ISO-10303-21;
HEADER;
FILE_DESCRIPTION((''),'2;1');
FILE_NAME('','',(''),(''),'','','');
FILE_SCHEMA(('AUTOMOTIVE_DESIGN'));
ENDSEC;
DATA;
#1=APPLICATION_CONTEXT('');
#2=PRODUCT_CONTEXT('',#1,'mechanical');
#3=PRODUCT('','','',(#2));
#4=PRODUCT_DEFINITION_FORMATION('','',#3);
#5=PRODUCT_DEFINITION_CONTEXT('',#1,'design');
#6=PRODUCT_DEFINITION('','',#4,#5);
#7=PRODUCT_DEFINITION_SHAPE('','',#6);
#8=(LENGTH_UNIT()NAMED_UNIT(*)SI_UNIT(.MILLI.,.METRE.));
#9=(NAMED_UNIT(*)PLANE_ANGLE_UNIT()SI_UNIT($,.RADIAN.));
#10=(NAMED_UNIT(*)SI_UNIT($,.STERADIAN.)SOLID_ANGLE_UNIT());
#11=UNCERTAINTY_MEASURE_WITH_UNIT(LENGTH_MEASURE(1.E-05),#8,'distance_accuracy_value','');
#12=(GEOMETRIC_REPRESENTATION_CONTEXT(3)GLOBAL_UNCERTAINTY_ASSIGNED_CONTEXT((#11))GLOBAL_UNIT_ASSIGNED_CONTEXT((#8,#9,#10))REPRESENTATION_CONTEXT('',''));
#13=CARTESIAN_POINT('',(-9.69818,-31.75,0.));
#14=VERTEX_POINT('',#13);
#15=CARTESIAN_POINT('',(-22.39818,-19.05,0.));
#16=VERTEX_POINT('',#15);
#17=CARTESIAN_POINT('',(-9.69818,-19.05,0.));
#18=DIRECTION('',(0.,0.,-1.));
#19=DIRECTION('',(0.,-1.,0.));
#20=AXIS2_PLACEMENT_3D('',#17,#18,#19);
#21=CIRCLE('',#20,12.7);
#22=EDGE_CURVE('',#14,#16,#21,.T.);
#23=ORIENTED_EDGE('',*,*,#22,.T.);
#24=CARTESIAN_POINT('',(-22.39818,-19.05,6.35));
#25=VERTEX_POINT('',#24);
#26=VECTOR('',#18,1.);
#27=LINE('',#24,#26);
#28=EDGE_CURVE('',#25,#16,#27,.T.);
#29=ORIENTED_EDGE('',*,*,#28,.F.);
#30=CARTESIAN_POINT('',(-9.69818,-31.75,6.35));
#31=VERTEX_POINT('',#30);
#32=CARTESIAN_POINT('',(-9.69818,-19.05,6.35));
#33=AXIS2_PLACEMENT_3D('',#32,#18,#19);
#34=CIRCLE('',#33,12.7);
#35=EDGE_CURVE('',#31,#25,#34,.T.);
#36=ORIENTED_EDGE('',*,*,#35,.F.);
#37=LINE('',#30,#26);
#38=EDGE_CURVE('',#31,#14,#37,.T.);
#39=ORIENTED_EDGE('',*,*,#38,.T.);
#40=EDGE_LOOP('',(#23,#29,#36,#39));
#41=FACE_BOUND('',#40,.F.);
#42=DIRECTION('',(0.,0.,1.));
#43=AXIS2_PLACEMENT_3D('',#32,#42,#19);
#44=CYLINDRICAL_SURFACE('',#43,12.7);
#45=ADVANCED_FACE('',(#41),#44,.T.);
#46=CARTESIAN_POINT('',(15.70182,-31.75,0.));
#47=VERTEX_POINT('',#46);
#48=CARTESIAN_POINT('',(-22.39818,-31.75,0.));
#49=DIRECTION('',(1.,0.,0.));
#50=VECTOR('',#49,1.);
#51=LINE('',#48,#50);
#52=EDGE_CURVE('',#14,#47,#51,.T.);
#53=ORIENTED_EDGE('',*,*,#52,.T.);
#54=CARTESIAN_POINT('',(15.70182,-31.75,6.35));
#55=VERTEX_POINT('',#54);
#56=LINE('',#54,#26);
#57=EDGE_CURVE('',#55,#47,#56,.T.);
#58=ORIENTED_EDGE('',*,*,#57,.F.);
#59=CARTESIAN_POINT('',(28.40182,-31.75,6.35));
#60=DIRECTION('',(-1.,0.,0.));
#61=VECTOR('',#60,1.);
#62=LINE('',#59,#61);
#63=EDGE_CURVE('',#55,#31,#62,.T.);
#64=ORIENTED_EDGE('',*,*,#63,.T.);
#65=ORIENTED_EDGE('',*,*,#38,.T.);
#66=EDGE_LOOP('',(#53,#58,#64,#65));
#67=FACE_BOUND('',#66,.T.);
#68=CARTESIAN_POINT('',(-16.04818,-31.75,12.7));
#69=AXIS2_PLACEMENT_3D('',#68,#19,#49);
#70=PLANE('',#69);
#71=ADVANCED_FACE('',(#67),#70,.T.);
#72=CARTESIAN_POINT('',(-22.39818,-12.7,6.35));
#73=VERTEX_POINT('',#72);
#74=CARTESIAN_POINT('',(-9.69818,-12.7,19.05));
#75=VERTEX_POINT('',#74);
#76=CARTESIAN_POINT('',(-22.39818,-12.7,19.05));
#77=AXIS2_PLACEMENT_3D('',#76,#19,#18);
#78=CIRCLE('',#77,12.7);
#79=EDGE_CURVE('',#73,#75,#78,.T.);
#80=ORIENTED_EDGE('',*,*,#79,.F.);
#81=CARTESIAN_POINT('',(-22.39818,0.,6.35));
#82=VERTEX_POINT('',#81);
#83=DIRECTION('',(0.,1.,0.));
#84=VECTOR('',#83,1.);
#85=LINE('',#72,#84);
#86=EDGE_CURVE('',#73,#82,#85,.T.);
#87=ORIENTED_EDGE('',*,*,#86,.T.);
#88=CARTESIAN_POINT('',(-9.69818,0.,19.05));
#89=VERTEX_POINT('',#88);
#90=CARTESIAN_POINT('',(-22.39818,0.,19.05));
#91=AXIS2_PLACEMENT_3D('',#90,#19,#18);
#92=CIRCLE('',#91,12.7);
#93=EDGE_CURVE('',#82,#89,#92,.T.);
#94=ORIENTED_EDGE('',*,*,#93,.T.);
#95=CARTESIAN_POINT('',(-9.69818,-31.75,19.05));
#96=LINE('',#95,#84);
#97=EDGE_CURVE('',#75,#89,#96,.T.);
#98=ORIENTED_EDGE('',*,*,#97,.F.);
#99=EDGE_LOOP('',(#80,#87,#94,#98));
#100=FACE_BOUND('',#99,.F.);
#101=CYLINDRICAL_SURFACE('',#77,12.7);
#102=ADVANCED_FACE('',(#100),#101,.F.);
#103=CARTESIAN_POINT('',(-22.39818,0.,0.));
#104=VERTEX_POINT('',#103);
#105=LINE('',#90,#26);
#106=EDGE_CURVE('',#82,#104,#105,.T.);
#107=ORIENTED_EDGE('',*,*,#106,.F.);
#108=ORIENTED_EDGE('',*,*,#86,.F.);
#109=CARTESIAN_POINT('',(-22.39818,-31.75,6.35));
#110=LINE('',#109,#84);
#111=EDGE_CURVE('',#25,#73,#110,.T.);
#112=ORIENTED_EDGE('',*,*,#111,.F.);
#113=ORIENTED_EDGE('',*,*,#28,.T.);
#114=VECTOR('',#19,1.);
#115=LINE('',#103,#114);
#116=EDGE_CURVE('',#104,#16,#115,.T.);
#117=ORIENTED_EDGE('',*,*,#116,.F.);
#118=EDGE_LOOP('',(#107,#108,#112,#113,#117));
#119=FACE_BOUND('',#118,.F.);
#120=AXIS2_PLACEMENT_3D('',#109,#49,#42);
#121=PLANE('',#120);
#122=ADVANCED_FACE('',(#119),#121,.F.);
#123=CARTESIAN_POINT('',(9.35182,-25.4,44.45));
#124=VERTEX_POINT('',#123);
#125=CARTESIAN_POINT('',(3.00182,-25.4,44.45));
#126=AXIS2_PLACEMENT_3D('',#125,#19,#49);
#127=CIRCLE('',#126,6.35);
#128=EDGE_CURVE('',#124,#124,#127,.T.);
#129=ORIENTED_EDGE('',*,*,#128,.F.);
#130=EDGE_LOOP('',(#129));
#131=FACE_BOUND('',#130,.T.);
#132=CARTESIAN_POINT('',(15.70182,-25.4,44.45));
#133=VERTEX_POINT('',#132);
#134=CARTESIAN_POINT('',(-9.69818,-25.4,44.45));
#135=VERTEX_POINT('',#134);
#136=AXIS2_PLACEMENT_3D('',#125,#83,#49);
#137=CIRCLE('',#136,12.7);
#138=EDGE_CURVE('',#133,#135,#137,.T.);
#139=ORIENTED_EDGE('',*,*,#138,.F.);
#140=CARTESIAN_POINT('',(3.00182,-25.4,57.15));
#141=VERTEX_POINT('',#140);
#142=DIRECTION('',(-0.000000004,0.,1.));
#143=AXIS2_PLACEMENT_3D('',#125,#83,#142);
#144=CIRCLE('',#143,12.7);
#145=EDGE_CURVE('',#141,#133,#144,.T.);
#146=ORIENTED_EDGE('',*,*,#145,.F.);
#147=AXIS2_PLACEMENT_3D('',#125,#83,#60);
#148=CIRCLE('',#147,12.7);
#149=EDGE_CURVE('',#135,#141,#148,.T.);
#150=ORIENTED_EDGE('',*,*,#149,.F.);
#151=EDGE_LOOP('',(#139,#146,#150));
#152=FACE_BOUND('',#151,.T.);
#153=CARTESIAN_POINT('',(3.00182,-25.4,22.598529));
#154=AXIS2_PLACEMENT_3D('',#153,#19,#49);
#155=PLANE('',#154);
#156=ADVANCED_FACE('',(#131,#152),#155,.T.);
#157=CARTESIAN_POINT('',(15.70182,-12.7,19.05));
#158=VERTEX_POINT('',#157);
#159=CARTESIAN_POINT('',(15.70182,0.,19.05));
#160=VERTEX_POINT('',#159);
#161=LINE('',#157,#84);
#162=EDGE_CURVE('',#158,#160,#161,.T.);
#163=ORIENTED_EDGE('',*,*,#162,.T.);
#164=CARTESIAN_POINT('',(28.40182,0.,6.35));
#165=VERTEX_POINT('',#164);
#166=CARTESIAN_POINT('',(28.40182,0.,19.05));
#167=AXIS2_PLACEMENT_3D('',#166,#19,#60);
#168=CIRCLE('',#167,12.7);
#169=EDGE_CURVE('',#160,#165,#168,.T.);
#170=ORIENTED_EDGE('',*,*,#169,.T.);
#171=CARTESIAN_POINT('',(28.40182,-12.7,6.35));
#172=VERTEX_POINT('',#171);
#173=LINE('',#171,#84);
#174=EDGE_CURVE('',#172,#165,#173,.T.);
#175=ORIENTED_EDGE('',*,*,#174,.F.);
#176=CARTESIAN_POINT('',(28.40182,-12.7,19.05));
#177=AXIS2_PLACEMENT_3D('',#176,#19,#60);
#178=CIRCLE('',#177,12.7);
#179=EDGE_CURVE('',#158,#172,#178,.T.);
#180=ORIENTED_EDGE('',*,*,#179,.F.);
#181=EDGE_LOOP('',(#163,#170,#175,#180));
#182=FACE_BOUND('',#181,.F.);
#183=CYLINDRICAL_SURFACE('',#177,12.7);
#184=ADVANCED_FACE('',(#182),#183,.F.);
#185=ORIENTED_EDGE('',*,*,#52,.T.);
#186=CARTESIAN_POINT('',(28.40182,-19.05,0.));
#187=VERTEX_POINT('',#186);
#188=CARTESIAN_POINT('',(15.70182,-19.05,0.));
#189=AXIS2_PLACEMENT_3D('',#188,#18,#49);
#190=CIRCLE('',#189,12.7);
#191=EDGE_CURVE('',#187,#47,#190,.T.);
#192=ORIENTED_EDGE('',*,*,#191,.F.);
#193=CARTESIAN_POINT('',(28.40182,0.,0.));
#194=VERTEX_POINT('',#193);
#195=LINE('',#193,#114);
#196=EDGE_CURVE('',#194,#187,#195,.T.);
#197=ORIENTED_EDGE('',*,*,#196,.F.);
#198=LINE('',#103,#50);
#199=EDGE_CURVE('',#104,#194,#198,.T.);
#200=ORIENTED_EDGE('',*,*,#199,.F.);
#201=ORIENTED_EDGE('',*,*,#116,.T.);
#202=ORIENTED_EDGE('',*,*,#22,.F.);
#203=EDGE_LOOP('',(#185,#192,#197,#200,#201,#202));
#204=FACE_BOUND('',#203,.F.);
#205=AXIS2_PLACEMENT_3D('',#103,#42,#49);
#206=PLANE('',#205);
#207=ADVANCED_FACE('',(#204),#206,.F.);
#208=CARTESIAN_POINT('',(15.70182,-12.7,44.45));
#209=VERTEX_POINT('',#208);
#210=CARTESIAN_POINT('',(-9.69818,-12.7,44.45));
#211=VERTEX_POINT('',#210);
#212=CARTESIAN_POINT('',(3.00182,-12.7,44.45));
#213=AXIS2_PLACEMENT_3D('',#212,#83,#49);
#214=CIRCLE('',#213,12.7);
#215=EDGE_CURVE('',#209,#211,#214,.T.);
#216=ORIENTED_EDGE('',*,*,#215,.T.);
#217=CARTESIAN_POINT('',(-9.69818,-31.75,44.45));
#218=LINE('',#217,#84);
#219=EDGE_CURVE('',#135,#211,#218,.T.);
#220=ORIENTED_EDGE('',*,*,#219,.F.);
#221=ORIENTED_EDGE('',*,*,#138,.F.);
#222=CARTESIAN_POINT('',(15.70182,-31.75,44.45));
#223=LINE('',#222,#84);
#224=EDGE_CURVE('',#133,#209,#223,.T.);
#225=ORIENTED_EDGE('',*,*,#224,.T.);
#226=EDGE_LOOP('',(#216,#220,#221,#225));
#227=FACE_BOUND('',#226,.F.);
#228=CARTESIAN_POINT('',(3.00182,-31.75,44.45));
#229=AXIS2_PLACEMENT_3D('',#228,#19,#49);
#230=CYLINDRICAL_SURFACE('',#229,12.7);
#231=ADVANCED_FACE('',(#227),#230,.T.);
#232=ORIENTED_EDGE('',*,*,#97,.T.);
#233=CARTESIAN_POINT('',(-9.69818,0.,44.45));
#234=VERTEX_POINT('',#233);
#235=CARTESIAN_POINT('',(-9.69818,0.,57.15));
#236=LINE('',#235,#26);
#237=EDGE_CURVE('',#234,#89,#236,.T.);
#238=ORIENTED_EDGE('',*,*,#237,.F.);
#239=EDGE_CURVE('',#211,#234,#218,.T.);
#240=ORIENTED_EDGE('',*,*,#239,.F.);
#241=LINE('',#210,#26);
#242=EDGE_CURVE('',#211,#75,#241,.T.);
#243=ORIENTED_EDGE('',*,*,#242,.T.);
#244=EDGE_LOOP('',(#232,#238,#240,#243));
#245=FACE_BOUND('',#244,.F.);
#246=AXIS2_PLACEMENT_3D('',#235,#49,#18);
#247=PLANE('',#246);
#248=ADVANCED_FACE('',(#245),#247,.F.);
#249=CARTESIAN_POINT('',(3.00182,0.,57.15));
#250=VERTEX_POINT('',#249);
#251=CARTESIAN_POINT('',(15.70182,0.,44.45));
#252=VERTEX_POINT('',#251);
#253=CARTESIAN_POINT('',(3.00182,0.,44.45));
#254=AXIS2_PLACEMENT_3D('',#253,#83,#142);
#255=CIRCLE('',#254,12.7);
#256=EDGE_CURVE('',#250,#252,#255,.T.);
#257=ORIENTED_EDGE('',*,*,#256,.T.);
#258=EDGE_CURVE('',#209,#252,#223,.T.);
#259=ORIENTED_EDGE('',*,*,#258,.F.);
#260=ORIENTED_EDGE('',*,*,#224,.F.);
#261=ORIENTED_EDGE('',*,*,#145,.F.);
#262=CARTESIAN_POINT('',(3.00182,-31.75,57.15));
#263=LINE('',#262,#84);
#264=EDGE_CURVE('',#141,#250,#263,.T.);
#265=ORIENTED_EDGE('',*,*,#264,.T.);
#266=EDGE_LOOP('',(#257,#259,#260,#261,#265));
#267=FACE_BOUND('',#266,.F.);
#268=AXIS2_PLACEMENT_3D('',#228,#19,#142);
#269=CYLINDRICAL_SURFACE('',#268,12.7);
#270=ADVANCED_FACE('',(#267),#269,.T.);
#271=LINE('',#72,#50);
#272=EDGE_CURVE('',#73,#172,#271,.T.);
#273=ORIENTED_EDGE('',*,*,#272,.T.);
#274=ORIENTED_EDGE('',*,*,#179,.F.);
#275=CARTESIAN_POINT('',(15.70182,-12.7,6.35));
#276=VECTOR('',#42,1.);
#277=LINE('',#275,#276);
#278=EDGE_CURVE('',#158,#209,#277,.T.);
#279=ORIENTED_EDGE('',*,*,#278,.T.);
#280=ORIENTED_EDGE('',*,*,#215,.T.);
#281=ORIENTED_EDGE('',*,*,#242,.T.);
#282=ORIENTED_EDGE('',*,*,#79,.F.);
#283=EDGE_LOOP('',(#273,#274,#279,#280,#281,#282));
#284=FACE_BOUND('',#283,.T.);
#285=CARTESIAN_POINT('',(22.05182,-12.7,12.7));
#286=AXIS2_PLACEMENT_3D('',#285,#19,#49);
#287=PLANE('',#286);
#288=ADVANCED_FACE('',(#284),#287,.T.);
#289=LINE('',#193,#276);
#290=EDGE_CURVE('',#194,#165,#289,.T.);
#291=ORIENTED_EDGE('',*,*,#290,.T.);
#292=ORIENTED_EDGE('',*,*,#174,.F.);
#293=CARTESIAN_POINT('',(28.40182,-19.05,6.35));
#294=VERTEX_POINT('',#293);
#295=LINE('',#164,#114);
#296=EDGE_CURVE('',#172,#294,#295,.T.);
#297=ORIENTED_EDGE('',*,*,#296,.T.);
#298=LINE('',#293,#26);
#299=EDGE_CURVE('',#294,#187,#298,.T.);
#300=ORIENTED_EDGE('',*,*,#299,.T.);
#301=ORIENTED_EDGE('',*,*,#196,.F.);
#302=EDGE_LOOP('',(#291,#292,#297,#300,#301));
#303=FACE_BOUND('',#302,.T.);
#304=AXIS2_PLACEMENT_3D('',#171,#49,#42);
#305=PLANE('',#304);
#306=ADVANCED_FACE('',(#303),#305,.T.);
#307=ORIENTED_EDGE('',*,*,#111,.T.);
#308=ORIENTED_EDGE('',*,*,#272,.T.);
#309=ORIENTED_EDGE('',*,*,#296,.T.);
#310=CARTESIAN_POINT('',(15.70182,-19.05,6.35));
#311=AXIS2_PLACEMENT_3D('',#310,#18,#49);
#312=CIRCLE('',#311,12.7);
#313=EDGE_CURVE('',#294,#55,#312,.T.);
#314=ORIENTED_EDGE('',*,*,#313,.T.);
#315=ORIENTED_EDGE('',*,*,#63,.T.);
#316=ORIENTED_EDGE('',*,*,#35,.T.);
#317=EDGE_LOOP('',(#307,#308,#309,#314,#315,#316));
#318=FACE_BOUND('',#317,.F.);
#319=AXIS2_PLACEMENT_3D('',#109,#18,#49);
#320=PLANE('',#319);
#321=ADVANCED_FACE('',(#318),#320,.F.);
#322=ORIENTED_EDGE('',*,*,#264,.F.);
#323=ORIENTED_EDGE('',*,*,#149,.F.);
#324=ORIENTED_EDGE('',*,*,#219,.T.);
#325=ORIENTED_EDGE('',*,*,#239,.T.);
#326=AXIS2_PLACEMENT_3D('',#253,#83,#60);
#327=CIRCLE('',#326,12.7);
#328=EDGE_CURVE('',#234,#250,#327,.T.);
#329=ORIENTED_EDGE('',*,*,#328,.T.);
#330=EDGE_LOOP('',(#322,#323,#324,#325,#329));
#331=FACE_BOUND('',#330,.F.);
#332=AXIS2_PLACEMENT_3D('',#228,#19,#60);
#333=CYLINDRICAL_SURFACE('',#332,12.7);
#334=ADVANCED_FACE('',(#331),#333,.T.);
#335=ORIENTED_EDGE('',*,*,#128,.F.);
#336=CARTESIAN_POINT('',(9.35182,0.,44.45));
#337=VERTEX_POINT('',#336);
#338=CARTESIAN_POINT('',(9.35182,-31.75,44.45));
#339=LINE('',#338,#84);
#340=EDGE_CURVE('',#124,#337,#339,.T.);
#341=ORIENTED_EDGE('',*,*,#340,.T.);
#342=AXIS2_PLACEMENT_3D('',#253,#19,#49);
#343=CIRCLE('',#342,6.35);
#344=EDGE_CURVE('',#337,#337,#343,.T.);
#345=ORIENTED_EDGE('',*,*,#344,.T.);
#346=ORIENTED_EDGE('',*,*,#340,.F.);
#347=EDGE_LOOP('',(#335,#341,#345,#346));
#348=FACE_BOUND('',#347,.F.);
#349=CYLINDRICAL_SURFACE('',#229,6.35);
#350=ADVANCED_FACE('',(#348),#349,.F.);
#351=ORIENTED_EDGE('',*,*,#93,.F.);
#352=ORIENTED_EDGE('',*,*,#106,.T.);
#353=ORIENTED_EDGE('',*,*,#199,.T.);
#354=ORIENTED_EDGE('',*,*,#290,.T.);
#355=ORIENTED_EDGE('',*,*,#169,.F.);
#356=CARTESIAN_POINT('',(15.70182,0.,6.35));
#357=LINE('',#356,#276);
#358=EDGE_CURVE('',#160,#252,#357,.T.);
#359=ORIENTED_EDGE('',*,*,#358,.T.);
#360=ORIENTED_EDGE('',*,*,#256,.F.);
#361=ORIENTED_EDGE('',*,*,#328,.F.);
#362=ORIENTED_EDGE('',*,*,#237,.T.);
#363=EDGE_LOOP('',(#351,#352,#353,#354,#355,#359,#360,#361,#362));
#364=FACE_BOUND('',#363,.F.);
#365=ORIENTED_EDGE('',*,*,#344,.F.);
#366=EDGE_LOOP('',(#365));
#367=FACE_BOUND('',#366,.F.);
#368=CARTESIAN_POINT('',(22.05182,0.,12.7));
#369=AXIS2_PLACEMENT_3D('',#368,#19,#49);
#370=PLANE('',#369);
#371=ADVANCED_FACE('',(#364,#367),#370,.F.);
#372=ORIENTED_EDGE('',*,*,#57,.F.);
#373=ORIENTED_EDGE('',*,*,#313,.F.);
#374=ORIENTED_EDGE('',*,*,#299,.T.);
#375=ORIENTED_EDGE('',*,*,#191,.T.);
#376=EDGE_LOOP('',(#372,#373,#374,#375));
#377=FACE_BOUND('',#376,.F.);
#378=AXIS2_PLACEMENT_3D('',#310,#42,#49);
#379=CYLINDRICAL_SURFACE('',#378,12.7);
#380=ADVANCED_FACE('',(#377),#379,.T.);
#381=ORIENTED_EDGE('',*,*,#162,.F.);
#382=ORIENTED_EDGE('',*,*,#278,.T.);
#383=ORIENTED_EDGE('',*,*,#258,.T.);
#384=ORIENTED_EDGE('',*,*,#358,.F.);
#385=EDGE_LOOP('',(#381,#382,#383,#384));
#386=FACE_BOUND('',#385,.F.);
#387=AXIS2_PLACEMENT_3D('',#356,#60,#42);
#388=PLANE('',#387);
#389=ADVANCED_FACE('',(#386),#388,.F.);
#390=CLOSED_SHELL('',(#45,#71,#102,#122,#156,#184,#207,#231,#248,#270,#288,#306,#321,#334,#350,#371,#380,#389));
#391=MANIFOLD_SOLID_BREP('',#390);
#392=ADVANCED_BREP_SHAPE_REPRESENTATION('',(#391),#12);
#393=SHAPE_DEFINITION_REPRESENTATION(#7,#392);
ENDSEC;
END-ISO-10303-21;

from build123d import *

# Parameters (mm, degrees)
F1_DEPTH  = 31.75
F2_R      = 6.35
F3_DEPTH  = 31.75
F5_DEPTH  = 31.75
F7_DEPTH  = 19.05
F8_DEPTH  = 6.35
F9_W      = 12.7
F9_H      = 12.7
F10_DEPTH = 31.75
F11_W     = 12.7
F11_H     = 12.7
F12_DEPTH = 19.05
F14_DEPTH = 12.7
F15_W     = 12.7
F15_H     = 12.7
F16_DEPTH = 12.7
F18_DEPTH = 12.7
F19_R     = 1.5875
F20_DEPTH = 12.7
F22_DEPTH = 6.35


# Not quite as in the source:
# - a feature names something its author has since deleted; it is built from what else it names


with BuildPart() as f1:
    # F0 (on Front) → F1 (new body)
    with BuildSketch(Plane.XZ):
        Polygon((-9.6981803781, 6.35), (-22.3981803781, 6.35), (-22.3981803781, 0), (28.4018196219, 0), (28.4018196219, 6.35), (15.7018196219, 6.35), (15.7018196219, 57.15), (-9.6981803781, 57.15), align=None)
    extrude(amount=F1_DEPTH)

    # F2 (on face) → F3 (cut)
    with BuildSketch(Plane.XZ.offset(31.75)):
        with Locations((3.0018196219, 44.45)):
            Circle(F2_R)
    extrude(amount=-F3_DEPTH, mode=Mode.SUBTRACT)

    # F4 (on face) → F5 (cut)
    with BuildSketch(Plane.XZ.offset(31.75)):
        with BuildLine():
            ThreePointArc((-9.6981803781, 44.45), (-5.9784365163, 53.4302561039), (3.0018195733, 57.15))
            Line((3.0018195733, 57.15), (-9.6981803781, 57.15))
            Line((-9.6981803781, 57.15), (-9.6981803781, 44.45))
        make_face()
        with BuildLine():
            ThreePointArc((3.0018195733, 57.15), (11.9820757258, 53.4302561383), (15.7018196219, 44.45))
            Line((15.7018196219, 44.45), (15.7018196219, 57.15))
            Line((15.7018196219, 57.15), (3.0018195733, 57.15))
        make_face()
    extrude(amount=-F5_DEPTH, mode=Mode.SUBTRACT)

    # F6 (on face) → F7 (cut)
    with BuildSketch(Plane.XZ.offset(31.75)):
        with BuildLine():
            Line((15.7018196219, 6.35), (15.7018196219, 44.45))
            ThreePointArc((15.7018196219, 44.45), (3.0018196219, 31.75), (-9.6981803781, 44.45))
            Line((-9.6981803781, 44.45), (-9.6981803781, 6.35))
            Line((-9.6981803781, 6.35), (15.7018196219, 6.35))
        make_face()
    extrude(amount=-F7_DEPTH, mode=Mode.SUBTRACT)

    # F8 (cut): a face of the model
    f8_faces = [f1.faces().sort_by_distance(p)[0] for p in [
        (15.3426093771, -31.75, 44.45),
    ]]
    extrude(f8_faces, amount=-F8_DEPTH, mode=Mode.SUBTRACT)

    # F9 (on face) → F10 (join)
    with BuildSketch(Plane.XZ.offset(31.75)):
        with Locations((-16.0481803781, 12.7)):
            Rectangle(F9_W, F9_H)
    extrude(amount=-F10_DEPTH)

    # F11 (on face) → F12 (cut)
    with BuildSketch(Plane.XZ.offset(31.75)):
        with Locations((-16.0481803781, 12.7)):
            Rectangle(F11_W, F11_H)
    extrude(amount=-F12_DEPTH, mode=Mode.SUBTRACT)

    # F13 (on face) → F14 (cut)
    with BuildSketch(Plane.XZ.offset(12.7)):
        with BuildLine():
            Line((-22.3981803781, 19.05), (-22.3981803781, 6.35))
            ThreePointArc((-22.3981803781, 6.35), (-13.417924257, 10.0697438789), (-9.6981803781, 19.05))
            Line((-9.6981803781, 19.05), (-22.3981803781, 19.05))
        make_face()
    extrude(amount=-F14_DEPTH, mode=Mode.SUBTRACT)

    # F15 (on face) → F16 (join)
    with BuildSketch(Plane.XZ.offset(12.7)):
        with Locations((22.0518196219, 12.7)):
            Rectangle(F15_W, F15_H)
    extrude(amount=-F16_DEPTH)

    # F17 (on face) → F18 (cut)
    with BuildSketch(Plane.XZ.offset(12.7)):
        with BuildLine():
            Line((28.4018196219, 19.05), (15.7018196219, 19.05))
            ThreePointArc((15.7018196219, 19.05), (19.4215635009, 10.0697438789), (28.4018196219, 6.35))
            Line((28.4018196219, 6.35), (28.4018196219, 19.05))
        make_face()
    extrude(amount=-F18_DEPTH, mode=Mode.SUBTRACT)

    # F19 (on Top) → F20 (cut)
    with BuildSketch(Plane.XY):
        with Locations((-12.8731803781, -22.225)):
            Circle(F19_R)
        with Locations((18.8768196219, -22.225)):
            Circle(F19_R)
    extrude(amount=-F20_DEPTH, mode=Mode.SUBTRACT)

    # F21 (on face) → F22 (cut)
    with BuildSketch(Plane.XY.offset(6.35)):
        with BuildLine():
            ThreePointArc((-9.6981803781, -31.75), (-18.6784364991, -28.0302561211), (-22.3981803781, -19.05))
            Line((-22.3981803781, -19.05), (-22.3981803781, -31.75))
            Line((-22.3981803781, -31.75), (-9.6981803781, -31.75))
        make_face()
        with BuildLine():
            ThreePointArc((28.4018196219, -19.05), (24.682075743, -28.0302561211), (15.7018196219, -31.75))
            Line((15.7018196219, -31.75), (28.4018196219, -31.75))
            Line((28.4018196219, -31.75), (28.4018196219, -19.05))
        make_face()
    extrude(amount=-F22_DEPTH, mode=Mode.SUBTRACT)


solid = f1.part
